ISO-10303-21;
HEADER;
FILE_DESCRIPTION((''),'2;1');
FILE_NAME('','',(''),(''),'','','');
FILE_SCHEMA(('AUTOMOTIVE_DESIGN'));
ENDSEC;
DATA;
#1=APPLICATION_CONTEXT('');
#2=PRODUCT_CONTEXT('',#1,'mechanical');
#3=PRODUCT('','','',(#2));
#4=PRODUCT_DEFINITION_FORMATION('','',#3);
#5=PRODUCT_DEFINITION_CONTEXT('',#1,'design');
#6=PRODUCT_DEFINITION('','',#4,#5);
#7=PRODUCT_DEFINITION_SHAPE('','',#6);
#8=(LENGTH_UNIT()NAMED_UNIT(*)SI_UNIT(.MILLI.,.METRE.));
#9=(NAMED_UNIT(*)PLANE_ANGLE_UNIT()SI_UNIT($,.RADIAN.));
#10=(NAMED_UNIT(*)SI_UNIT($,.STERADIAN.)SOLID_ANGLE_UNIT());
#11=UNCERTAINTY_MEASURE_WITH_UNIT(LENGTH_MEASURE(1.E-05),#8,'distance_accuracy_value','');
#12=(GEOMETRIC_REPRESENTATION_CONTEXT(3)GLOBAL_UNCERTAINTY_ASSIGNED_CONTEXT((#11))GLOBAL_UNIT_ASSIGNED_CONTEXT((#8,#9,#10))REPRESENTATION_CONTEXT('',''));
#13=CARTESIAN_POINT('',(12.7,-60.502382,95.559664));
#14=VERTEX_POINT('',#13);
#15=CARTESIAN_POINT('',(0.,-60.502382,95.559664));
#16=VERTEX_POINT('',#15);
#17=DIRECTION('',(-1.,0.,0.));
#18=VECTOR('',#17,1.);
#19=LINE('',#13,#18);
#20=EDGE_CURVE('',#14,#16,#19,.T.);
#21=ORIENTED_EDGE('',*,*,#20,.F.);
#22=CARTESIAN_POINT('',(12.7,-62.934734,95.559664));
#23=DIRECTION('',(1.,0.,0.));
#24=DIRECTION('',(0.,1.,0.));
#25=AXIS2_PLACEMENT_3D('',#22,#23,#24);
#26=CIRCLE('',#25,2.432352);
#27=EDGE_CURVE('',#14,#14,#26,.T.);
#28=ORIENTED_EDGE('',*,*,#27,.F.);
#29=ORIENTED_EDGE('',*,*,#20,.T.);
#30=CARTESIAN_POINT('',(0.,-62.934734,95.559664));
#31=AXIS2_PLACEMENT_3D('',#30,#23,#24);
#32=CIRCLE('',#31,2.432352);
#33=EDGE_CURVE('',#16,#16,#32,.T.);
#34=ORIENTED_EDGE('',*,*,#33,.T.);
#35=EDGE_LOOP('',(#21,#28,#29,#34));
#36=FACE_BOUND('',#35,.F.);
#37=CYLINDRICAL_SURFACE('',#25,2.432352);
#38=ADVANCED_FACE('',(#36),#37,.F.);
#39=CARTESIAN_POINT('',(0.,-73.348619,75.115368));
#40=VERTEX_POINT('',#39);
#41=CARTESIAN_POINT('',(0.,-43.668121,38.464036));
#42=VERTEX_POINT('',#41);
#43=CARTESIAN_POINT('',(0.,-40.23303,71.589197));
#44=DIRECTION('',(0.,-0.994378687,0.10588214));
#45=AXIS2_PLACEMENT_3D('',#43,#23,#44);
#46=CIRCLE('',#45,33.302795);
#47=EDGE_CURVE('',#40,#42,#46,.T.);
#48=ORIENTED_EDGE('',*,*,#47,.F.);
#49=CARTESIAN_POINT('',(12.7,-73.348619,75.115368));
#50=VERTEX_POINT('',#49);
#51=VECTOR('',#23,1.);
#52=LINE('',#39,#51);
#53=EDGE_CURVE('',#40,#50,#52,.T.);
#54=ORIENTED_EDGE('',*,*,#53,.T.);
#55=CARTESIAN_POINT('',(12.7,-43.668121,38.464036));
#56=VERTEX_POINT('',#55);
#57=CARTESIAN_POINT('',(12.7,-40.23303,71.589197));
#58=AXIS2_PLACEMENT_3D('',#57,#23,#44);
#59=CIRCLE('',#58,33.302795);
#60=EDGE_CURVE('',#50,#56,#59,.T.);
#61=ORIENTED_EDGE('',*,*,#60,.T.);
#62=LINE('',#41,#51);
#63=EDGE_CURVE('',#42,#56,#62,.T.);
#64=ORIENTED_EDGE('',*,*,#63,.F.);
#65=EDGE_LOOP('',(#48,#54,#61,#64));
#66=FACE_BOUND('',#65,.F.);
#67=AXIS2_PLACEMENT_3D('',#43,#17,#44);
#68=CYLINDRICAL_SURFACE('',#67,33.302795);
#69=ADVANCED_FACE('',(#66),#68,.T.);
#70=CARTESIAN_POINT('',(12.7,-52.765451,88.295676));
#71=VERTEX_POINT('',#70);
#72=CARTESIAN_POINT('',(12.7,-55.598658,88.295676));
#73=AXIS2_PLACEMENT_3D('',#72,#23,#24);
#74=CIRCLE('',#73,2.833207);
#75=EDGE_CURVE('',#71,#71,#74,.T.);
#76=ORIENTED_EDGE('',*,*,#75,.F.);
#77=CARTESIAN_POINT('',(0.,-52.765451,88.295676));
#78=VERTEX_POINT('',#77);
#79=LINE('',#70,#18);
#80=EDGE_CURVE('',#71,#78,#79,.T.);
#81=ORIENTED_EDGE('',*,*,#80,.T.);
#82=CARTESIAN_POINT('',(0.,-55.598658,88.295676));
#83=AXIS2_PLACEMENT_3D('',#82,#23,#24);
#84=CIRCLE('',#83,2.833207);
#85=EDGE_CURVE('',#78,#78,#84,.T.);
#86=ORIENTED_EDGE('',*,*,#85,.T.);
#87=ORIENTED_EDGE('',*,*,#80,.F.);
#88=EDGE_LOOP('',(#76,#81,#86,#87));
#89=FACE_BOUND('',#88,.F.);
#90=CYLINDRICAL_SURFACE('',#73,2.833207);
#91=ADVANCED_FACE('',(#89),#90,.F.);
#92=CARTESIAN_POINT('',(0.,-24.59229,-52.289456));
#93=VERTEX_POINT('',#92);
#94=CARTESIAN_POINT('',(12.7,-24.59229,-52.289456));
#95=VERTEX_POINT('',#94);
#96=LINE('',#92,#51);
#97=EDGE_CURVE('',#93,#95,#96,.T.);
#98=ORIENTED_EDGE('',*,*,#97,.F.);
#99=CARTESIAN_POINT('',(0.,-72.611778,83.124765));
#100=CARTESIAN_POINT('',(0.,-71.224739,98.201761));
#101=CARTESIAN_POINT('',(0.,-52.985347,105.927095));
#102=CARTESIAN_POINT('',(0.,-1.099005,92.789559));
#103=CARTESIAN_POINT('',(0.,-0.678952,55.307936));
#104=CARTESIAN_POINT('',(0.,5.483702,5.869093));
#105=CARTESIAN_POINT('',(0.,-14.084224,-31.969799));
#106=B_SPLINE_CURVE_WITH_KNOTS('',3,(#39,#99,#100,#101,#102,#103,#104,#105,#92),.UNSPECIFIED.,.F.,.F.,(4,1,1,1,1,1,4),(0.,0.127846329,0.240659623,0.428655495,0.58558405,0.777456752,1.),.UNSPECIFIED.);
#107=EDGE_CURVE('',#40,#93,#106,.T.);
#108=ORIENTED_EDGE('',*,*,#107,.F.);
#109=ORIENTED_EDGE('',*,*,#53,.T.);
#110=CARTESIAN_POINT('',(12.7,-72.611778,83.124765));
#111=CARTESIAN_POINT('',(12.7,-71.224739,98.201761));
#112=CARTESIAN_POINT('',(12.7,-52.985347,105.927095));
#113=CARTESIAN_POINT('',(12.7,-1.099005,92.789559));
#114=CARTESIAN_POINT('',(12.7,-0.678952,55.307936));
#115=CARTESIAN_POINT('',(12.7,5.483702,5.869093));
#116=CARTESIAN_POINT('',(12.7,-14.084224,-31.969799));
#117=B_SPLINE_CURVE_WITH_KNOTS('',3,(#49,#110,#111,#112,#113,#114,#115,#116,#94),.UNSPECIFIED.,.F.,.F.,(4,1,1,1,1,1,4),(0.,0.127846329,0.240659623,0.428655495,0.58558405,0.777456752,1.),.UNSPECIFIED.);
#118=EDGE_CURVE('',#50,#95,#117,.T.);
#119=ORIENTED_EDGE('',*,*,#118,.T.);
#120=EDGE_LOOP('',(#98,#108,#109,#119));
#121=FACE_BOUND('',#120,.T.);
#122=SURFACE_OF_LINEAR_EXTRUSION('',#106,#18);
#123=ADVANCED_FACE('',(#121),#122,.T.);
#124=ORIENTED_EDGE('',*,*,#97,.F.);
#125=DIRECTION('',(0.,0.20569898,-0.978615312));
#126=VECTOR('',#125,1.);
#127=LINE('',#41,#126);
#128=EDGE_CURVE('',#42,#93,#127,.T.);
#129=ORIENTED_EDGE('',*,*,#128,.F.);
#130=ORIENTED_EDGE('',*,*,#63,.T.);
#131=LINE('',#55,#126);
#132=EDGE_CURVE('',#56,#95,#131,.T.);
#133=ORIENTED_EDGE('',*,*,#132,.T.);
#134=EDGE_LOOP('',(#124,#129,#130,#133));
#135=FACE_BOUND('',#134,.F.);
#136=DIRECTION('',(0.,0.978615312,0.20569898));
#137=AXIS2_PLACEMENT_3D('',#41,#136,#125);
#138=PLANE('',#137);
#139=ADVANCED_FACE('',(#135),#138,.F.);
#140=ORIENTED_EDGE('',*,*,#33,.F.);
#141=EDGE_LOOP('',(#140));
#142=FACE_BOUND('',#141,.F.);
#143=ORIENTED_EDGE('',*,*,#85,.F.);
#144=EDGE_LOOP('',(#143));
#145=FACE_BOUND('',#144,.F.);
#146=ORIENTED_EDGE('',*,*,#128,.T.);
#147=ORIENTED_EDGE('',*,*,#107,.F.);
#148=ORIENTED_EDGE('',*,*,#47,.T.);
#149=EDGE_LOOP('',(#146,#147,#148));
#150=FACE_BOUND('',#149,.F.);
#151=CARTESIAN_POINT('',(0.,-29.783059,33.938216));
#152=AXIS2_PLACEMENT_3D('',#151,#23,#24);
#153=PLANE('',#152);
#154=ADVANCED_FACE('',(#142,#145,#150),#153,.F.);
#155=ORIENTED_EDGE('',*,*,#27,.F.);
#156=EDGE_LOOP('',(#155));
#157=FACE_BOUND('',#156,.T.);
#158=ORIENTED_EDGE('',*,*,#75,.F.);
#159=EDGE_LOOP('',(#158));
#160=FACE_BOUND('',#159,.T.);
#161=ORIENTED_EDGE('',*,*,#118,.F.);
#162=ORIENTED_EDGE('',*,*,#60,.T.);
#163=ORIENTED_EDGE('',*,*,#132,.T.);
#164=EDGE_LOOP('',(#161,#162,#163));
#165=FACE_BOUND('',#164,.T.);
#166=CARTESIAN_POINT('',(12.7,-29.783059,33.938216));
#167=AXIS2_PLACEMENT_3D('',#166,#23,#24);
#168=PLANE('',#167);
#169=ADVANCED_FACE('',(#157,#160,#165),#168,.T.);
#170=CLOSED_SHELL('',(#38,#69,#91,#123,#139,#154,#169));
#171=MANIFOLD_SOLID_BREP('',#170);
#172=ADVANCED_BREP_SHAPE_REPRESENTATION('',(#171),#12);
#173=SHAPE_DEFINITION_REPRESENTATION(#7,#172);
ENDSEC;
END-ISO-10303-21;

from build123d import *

# Parameters (mm, degrees)
F1_DEPTH = 12.7
F2_R     = 2.4323517369
F3_DEPTH = 25.4
F4_R     = 2.8332069334
F5_DEPTH = 25.4


# Not quite as in the source:
# - a length typed as a fraction of an inch, garbled in the dataset ("3 / 203.2 mm" for 3/8 in), is restored


with BuildPart() as f1:
    # F0 (on Right) → F1 (new body)
    with BuildSketch(Plane.YZ):
        with BuildLine():
            ThreePointArc((-73.3486190438, 75.1153677702), (-66.1138740034, 50.6307129788), (-43.6681210995, 38.4640358388))
            Line((-43.6681210995, 38.4640358388), (-24.5922897011, -52.2894561291))
            add(Edge.make_bspline(
                [(-73.3486190438, 75.1153677702), (-72.6117781214, 83.1247650404), (-71.2247390094, 98.2017605478), (-52.9853467307, 105.9270950428), (-1.0990052853, 92.7895590782), (-0.6789523299, 55.3079359595), (5.4837017479, 5.8690932712), (-14.0842244334, -31.9697990361), (-24.5922897011, -52.2894561291)],
                knots=[0, 0, 0, 0, 0.127846329, 0.2406596231, 0.4286554949, 0.58558405, 0.7774567519, 1, 1, 1, 1], degree=3))
        make_face()
    extrude(amount=F1_DEPTH)

    # F2 (on face) → F3 (cut)
    with BuildSketch(Plane.YZ.offset(12.7)):
        with Locations((-62.9347339272, 95.5596640706)):
            Circle(F2_R)
    extrude(amount=-F3_DEPTH, mode=Mode.SUBTRACT)

    # F4 (on face) → F5 (cut)
    with BuildSketch(Plane.YZ.offset(12.7)):
        with Locations((-55.5986575782, 88.2956758142)):
            Circle(F4_R)
    extrude(amount=-F5_DEPTH, mode=Mode.SUBTRACT)


solid = f1.part
